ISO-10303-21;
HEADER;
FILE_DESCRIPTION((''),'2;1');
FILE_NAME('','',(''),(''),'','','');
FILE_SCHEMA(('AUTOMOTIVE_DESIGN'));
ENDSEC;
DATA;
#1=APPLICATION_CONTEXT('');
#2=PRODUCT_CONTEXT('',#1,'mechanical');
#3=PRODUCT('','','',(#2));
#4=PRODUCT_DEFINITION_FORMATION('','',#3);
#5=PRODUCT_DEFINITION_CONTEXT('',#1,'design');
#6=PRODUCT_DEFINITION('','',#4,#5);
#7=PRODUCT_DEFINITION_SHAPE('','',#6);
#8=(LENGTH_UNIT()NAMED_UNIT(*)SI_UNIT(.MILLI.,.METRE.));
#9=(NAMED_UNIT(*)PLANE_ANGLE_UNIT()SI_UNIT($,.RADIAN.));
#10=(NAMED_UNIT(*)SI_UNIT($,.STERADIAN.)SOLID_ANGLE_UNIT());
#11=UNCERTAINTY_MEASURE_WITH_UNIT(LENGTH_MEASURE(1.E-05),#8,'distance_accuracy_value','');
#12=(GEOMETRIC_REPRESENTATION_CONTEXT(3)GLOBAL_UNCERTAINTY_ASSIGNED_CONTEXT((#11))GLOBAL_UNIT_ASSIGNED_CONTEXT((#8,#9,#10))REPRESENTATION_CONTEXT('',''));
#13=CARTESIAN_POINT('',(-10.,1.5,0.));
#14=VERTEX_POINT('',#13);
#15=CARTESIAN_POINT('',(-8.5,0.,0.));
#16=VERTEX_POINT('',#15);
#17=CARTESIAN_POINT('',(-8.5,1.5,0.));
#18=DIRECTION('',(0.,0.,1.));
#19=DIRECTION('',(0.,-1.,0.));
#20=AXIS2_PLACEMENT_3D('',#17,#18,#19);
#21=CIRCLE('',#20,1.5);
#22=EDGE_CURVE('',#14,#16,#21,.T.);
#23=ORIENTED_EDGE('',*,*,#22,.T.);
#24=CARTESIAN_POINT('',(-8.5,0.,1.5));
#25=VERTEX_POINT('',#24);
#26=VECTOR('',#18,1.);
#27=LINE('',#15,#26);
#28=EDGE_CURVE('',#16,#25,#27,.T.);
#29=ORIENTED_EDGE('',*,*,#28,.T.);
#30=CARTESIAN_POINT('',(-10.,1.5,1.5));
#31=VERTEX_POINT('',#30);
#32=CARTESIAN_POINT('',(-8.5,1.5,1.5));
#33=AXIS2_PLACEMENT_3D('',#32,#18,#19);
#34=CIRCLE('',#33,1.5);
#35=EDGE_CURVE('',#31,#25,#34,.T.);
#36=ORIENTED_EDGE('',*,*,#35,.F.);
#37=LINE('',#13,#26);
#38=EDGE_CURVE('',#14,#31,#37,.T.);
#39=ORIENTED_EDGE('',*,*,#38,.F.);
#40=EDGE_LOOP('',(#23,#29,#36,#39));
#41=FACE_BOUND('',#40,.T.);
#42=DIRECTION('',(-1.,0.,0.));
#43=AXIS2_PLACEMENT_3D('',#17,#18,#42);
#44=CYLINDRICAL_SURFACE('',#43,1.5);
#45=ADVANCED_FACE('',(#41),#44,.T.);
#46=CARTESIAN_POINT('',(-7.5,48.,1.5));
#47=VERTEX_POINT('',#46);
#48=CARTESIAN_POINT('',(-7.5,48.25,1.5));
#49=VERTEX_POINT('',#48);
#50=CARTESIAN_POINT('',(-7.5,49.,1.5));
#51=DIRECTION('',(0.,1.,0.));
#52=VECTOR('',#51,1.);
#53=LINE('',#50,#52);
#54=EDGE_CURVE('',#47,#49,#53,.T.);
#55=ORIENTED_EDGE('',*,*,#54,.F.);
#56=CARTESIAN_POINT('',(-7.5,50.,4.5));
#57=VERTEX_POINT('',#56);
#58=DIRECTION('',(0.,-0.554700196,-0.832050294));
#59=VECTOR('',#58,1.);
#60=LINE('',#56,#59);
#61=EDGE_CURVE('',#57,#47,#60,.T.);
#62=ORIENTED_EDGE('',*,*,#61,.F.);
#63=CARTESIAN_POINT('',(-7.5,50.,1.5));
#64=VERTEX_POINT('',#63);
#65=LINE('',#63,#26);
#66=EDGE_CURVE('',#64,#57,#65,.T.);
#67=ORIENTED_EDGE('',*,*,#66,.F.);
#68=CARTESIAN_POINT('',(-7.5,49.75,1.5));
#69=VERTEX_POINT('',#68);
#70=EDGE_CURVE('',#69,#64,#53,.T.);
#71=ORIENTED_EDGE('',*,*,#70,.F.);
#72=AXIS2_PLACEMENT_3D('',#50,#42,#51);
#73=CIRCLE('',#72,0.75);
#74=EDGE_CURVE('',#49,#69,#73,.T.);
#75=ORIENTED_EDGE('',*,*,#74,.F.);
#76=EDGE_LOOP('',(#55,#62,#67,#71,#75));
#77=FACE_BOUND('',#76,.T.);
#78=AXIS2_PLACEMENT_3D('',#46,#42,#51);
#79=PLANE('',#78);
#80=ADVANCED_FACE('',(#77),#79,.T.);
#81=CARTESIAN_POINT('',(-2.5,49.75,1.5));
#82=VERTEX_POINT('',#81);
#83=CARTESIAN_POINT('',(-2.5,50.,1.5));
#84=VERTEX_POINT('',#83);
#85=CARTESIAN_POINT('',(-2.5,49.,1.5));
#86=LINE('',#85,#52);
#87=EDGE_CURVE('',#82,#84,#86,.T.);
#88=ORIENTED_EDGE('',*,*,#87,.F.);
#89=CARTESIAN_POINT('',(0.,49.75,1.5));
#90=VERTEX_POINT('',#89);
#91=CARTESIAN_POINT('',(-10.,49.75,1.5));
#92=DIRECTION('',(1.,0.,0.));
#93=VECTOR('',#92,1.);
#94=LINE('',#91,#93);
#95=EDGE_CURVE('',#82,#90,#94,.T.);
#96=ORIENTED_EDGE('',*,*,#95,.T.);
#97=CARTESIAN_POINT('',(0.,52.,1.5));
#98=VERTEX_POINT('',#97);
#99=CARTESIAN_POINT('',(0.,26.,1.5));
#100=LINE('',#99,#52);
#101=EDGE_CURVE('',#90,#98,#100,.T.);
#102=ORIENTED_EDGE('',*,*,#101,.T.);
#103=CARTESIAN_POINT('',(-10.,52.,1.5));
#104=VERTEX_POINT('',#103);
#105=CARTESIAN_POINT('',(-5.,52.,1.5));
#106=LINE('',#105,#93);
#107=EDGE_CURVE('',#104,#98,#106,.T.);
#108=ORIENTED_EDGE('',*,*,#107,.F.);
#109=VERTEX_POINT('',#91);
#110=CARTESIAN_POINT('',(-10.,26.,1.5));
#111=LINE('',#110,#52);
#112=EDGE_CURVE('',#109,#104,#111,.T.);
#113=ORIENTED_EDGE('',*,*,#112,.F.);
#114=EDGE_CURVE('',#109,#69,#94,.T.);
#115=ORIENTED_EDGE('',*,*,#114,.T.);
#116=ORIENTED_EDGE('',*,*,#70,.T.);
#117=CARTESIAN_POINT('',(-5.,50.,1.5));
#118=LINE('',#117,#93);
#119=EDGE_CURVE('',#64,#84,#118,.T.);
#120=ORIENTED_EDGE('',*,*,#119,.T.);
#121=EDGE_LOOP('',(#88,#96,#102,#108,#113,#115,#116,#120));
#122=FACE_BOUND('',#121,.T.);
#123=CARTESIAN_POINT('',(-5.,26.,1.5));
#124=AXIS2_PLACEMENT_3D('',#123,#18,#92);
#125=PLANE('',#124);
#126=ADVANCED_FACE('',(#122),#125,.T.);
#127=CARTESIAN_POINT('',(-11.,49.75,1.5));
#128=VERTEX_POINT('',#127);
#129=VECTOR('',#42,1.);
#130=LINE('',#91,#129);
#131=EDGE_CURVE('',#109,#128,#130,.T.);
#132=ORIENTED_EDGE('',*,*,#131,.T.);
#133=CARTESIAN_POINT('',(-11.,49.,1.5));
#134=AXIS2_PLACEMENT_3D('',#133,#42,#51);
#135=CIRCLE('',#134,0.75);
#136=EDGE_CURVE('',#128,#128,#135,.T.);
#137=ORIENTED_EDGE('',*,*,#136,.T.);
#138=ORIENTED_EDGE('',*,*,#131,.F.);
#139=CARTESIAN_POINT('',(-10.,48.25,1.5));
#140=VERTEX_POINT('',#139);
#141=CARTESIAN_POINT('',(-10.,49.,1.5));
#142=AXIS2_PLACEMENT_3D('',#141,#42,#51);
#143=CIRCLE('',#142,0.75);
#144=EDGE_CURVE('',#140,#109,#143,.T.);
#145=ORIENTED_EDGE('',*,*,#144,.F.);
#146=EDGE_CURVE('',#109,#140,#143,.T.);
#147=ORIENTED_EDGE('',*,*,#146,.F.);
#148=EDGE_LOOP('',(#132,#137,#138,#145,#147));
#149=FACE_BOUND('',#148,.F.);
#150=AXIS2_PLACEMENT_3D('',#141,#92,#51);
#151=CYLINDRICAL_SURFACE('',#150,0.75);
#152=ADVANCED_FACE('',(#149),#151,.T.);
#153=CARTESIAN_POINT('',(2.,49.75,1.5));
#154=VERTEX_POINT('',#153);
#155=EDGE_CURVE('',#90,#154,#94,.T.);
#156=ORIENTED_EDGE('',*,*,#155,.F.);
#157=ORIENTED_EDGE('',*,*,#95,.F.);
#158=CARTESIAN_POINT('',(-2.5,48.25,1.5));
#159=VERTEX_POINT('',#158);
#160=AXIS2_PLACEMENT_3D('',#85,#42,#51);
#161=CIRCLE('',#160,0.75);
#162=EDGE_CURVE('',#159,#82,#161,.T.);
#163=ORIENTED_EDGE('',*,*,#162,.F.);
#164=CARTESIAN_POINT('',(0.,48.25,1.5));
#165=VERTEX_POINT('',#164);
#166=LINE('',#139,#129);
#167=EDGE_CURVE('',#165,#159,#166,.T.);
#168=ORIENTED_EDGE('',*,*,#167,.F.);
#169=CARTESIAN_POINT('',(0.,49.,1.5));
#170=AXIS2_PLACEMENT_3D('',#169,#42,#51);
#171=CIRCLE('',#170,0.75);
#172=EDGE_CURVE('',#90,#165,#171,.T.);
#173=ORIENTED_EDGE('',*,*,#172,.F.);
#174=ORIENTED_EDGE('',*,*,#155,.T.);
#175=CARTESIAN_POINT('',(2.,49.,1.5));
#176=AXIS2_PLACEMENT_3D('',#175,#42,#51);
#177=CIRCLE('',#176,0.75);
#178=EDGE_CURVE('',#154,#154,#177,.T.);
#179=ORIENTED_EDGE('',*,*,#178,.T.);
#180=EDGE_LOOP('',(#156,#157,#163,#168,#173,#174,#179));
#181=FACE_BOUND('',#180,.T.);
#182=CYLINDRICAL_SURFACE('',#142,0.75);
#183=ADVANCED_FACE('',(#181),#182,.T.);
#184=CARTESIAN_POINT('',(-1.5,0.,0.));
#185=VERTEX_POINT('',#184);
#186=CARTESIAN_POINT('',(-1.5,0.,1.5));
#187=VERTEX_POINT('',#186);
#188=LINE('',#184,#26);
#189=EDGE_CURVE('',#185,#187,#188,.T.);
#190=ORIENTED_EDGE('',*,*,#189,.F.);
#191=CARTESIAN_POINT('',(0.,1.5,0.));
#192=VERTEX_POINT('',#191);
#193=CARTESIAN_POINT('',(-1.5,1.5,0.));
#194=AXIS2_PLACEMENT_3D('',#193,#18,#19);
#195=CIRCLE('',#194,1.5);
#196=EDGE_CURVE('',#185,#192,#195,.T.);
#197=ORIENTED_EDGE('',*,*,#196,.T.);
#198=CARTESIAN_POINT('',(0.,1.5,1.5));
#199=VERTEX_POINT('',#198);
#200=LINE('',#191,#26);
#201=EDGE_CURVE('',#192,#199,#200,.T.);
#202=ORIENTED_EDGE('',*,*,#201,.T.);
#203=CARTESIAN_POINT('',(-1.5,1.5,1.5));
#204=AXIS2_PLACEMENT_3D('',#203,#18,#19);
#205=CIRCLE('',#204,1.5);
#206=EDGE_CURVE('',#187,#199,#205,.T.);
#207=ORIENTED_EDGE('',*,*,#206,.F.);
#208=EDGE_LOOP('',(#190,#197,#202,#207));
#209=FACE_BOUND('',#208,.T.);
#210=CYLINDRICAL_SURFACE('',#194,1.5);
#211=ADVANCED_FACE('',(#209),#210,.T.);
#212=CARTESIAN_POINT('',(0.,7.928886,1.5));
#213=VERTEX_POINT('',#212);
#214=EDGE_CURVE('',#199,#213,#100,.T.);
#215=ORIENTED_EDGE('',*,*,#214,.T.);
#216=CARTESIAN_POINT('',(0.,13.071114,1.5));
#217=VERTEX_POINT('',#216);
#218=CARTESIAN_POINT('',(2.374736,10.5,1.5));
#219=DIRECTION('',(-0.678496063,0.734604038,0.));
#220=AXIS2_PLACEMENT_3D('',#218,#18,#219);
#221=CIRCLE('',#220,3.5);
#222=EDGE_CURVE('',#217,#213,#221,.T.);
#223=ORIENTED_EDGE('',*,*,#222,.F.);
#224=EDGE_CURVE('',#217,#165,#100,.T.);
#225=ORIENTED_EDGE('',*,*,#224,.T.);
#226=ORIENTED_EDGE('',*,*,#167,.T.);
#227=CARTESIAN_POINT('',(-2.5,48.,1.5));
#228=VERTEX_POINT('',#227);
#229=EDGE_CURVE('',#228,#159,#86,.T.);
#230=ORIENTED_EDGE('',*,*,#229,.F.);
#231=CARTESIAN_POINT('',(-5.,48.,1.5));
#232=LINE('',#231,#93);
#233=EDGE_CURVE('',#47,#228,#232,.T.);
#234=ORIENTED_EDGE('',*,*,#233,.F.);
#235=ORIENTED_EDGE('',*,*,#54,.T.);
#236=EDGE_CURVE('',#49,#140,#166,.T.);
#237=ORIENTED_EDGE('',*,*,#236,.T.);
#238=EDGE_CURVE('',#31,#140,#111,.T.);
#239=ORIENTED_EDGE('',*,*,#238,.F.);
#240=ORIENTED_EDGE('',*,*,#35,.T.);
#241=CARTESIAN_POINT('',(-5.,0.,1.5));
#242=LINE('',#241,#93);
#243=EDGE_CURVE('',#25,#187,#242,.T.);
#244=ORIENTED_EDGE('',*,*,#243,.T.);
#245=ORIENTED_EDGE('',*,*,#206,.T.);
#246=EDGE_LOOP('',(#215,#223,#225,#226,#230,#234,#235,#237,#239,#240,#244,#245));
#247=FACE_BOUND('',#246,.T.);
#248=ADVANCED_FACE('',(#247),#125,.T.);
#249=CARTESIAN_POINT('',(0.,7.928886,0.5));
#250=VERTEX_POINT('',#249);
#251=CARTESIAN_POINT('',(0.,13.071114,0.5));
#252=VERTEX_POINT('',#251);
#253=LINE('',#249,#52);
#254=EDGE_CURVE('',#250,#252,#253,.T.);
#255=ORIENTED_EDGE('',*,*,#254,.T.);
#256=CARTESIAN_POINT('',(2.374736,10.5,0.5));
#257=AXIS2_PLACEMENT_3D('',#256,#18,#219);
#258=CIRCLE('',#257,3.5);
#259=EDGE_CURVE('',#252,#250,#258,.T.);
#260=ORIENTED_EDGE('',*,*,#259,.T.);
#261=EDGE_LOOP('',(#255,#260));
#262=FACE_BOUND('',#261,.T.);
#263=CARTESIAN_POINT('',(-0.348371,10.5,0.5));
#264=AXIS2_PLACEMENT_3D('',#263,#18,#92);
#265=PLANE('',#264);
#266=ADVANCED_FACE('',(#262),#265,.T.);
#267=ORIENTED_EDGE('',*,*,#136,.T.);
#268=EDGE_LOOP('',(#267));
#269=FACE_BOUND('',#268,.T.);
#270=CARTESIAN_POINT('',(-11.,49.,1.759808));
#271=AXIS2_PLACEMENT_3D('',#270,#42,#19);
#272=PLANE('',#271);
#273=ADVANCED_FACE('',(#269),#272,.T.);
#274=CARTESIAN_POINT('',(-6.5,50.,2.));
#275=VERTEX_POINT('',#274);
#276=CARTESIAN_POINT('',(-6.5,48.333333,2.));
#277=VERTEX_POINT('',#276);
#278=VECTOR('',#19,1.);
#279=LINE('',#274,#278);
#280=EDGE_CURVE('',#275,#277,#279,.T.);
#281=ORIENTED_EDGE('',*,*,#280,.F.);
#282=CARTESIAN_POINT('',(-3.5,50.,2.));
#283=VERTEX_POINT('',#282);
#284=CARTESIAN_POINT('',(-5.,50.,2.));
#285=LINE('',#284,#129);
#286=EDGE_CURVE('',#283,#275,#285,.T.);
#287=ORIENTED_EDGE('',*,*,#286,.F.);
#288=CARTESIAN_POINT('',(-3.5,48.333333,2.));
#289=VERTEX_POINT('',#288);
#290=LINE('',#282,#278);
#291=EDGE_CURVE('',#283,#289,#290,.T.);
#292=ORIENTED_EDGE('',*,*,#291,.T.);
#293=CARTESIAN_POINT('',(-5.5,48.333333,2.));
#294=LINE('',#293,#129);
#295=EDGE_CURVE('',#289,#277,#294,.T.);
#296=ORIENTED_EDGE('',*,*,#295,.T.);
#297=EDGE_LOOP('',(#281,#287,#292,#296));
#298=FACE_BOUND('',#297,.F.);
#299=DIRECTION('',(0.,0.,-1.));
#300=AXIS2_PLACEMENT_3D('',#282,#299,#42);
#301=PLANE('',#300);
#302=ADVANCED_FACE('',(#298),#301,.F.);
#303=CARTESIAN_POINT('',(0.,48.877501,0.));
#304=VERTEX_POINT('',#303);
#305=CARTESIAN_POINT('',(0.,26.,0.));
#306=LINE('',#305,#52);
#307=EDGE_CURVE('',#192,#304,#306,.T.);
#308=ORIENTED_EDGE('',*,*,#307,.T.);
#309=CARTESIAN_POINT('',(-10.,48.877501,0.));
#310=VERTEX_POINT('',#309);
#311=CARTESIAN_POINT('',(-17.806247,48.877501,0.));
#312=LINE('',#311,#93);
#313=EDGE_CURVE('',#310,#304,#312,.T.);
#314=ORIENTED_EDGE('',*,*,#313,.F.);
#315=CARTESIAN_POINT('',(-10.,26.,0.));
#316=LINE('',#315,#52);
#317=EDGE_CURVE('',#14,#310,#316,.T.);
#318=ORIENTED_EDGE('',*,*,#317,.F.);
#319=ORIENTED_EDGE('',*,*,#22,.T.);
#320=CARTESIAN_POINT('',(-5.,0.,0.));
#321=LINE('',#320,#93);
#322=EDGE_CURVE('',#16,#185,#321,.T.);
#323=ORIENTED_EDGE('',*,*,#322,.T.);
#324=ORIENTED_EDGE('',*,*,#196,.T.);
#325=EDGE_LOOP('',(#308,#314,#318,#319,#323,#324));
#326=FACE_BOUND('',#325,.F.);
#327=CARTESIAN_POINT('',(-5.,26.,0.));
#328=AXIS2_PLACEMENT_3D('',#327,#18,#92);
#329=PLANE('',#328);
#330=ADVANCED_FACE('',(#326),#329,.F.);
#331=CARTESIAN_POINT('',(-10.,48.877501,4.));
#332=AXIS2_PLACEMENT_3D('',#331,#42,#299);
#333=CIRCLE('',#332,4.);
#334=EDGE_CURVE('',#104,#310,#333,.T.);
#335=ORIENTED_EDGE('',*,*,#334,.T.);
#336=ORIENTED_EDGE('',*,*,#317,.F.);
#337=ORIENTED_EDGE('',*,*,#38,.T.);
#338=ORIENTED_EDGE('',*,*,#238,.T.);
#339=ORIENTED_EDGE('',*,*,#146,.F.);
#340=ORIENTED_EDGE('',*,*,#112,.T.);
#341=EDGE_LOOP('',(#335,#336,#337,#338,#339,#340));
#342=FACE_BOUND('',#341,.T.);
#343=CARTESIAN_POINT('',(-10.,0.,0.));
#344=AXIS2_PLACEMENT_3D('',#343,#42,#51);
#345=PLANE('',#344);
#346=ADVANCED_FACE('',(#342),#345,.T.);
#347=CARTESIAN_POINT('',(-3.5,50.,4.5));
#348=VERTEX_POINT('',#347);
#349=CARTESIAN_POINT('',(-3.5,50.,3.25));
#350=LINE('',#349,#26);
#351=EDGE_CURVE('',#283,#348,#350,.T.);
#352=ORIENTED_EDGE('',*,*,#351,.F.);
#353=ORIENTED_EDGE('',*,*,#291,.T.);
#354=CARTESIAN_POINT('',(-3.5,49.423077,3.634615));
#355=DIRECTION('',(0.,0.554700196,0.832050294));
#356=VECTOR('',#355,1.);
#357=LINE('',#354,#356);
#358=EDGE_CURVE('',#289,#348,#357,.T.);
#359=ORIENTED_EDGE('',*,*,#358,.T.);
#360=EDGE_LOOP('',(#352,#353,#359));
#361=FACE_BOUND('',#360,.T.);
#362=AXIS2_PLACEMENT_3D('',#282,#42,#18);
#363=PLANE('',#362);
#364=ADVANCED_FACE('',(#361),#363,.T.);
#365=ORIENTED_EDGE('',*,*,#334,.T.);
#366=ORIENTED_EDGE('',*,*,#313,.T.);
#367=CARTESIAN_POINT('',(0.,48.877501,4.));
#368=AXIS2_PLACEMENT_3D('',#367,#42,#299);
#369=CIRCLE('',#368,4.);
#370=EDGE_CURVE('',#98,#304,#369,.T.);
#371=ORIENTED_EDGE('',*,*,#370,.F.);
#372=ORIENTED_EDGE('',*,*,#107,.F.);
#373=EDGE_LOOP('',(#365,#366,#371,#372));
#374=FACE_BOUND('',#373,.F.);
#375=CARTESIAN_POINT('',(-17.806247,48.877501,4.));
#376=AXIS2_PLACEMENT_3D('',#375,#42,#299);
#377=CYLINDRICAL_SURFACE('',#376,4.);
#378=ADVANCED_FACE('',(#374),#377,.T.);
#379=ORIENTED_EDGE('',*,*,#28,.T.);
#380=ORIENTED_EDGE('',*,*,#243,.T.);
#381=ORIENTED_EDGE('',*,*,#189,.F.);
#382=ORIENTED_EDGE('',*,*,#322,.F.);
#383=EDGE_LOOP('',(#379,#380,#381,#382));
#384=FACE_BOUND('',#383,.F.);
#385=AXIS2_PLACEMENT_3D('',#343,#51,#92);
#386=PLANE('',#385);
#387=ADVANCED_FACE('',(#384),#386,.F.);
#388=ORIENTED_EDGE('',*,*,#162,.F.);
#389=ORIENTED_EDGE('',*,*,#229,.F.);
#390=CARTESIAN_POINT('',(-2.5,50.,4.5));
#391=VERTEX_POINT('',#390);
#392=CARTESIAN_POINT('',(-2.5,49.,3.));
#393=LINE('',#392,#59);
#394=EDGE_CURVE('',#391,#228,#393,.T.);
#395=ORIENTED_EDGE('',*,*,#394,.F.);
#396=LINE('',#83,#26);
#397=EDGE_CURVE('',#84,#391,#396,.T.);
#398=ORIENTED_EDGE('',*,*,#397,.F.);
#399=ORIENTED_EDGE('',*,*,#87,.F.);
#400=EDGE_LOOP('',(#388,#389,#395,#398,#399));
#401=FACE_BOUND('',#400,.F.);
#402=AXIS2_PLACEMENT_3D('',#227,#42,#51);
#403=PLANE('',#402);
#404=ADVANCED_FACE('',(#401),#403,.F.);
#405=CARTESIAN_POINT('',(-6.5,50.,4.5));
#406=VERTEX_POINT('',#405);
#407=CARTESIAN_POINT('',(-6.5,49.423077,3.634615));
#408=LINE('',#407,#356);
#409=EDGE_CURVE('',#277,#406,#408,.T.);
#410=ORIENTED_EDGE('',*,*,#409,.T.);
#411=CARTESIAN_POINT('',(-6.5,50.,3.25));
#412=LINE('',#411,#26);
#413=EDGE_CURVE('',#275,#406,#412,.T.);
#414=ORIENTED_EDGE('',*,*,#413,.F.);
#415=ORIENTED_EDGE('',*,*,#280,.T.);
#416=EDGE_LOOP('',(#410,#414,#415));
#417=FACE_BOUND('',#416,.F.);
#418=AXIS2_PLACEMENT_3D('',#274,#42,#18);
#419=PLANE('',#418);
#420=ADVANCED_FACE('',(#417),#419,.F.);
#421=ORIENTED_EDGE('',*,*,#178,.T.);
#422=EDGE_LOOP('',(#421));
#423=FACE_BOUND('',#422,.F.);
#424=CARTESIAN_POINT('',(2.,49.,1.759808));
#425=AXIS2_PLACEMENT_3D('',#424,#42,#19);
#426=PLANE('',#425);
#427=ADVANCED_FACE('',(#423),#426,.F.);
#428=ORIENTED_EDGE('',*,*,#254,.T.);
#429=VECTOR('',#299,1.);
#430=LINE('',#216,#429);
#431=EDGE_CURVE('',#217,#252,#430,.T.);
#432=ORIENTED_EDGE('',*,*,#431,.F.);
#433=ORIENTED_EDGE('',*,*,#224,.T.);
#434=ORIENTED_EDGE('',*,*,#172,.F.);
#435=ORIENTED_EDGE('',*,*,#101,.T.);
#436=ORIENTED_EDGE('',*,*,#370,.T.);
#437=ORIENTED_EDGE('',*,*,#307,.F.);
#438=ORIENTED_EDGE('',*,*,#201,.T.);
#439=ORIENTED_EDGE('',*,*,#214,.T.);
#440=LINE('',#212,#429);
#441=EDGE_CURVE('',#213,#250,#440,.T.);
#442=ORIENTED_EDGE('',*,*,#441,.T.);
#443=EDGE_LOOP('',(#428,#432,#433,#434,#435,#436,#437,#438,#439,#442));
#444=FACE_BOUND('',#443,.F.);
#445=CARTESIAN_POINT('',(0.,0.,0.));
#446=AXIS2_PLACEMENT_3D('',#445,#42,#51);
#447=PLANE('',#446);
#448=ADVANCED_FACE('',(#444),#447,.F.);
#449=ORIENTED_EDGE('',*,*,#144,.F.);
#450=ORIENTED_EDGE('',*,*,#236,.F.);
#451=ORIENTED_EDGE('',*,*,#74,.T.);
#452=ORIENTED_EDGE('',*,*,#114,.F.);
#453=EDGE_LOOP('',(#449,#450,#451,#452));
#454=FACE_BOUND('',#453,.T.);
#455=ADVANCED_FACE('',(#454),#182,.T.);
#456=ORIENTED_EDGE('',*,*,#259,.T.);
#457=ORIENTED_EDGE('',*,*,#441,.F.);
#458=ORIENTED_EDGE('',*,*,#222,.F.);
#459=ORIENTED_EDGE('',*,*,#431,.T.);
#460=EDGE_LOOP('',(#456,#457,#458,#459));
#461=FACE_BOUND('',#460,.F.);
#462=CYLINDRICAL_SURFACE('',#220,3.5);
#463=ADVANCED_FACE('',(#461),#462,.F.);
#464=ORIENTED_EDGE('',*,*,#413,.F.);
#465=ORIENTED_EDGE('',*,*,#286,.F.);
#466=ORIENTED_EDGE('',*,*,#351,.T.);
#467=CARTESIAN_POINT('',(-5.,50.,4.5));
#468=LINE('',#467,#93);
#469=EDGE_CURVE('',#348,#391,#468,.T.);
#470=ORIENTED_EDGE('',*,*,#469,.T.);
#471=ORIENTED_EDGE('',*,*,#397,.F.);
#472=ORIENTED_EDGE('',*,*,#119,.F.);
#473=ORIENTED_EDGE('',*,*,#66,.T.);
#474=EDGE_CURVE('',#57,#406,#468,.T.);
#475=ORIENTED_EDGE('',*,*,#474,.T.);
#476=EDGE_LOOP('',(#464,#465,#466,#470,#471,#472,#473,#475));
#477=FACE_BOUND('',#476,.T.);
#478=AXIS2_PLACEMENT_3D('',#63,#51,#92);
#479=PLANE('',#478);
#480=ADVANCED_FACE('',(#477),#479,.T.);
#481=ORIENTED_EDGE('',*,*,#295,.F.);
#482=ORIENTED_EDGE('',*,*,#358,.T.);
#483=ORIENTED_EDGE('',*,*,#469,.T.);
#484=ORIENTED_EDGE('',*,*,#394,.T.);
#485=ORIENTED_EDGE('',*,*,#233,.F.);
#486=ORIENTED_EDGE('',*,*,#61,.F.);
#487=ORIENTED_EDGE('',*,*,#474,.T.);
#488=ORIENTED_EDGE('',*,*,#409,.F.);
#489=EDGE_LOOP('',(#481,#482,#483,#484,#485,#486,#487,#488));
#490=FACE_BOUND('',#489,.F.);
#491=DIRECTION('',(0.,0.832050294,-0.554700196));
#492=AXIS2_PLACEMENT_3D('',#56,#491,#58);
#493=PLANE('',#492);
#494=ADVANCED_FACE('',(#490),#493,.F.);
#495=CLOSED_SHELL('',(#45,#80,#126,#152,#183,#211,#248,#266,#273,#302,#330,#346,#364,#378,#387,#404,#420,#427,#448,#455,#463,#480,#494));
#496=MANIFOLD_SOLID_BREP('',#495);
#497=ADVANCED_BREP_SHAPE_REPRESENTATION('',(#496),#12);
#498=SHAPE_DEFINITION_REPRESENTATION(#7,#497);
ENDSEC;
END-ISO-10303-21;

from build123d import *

# Parameters (mm, degrees)
F0_W         = 10
F0_H         = 52
F1_DEPTH     = 1.5
F2_W         = 5
F2_H         = 2
F3_DEPTH     = 3
F5_DEPTH     = 6
F7_DEPTH     = 1
F8_DEPTH     = 12
F9_R         = 1.5
F10_R        = 1.5
F12_DEPTH    = 1
F13_T1_DEPTH = 25.612494996
F14_W        = 3
F14_H        = 2.5
F15_DEPTH    = 5


# Not quite as in the source:
# - a fillet or chamfer that OpenCascade refuses, or shapes differently, is made with other operations: its cross-section is extruded or revolved along the edge and cut away or added


with BuildPart() as f1:
    # F0 (on Top) → F1 (new body)
    with BuildSketch(Plane.XY):
        with Locations((-5, 26)):
            Rectangle(F0_W, F0_H)
    extrude(amount=F1_DEPTH)

    # F2 (on face) → F3 (join)
    with BuildSketch(Plane.XY.offset(1.5)):
        with Locations((-5, 49)):
            Rectangle(F2_W, F2_H)
    extrude(amount=F3_DEPTH)

    # F4 (on face) → F5 (cut)
    with BuildSketch(Plane(origin=(-7.5, 0, 0), x_dir=(0, -1, 0), z_dir=(-1, 0, 0))):
        Polygon((-48, 4.5), (-50, 4.5), (-48, 1.5), align=None)
    extrude(amount=-F5_DEPTH, mode=Mode.SUBTRACT)

    # F6 (on face) → F7 (join)
    with BuildSketch(Plane(origin=(-10, 0, 0), x_dir=(0, -1, 0), z_dir=(-1, 0, 0))):
        with BuildLine():
            Line((-49.75, 1.5), (-48.25, 1.5))
            ThreePointArc((-48.25, 1.5), (-49, 2.25), (-49.75, 1.5))
        make_face()
        with BuildLine():
            ThreePointArc((-49.75, 1.5), (-49, 0.75), (-48.25, 1.5))
            Line((-48.25, 1.5), (-49.75, 1.5))
        make_face()
    extrude(amount=F7_DEPTH)

    # F6 (on face) → F8 (join)
    with BuildSketch(Plane(origin=(-10, 0, 0), x_dir=(0, -1, 0), z_dir=(-1, 0, 0))):
        with BuildLine():
            Line((-49.75, 1.5), (-48.25, 1.5))
            ThreePointArc((-48.25, 1.5), (-49, 2.25), (-49.75, 1.5))
        make_face()
        with BuildLine():
            ThreePointArc((-49.75, 1.5), (-49, 0.75), (-48.25, 1.5))
            Line((-48.25, 1.5), (-49.75, 1.5))
        make_face()
    extrude(amount=-F8_DEPTH)

    # F9
    f9_edges = [f1.edges().sort_by_distance(p)[0] for p in [
        (-10, 0, 0.75),
    ]]
    fillet(f9_edges, radius=F9_R)

    # F10
    f10_edges = [f1.edges().sort_by_distance(p)[0] for p in [
        (0, 0, 0.75),
    ]]
    fillet(f10_edges, radius=F10_R)

    # F11 (on face) → F12 (cut)
    with BuildSketch(Plane.XY.offset(1.5)):
        with BuildLine():
            Line((0, 7.928885867), (0, 13.071114133))
            ThreePointArc((0, 13.071114133), (-1.1252637799, 10.5), (0, 7.928885867))
        make_face()
    extrude(amount=-F12_DEPTH, mode=Mode.SUBTRACT)

    # F13: fillet of radius 4 on 1 edges, made by hand

    # F13_s2 → F13_t1 (cut)
    with BuildSketch(Plane.YZ.offset(-17.806247498)):
        with BuildLine():
            ThreePointArc((48.8775010008, 0), (50.6095518084, 0.3944487245), (52, 1.5))
            Line((52, 1.5), (52, 0))
            Line((52, 0), (48.8775010008, 0))
        make_face()
    extrude(amount=F13_T1_DEPTH, mode=Mode.SUBTRACT)

    # F14 (on face) → F15 (cut)
    with BuildSketch(Plane(origin=(0, 50, 0), x_dir=(-1, 0, 0), z_dir=(0, 1, 0))):
        with Locations((5, 3.25)):
            Rectangle(F14_W, F14_H)
    extrude(amount=-F15_DEPTH, mode=Mode.SUBTRACT)


solid = f1.part
